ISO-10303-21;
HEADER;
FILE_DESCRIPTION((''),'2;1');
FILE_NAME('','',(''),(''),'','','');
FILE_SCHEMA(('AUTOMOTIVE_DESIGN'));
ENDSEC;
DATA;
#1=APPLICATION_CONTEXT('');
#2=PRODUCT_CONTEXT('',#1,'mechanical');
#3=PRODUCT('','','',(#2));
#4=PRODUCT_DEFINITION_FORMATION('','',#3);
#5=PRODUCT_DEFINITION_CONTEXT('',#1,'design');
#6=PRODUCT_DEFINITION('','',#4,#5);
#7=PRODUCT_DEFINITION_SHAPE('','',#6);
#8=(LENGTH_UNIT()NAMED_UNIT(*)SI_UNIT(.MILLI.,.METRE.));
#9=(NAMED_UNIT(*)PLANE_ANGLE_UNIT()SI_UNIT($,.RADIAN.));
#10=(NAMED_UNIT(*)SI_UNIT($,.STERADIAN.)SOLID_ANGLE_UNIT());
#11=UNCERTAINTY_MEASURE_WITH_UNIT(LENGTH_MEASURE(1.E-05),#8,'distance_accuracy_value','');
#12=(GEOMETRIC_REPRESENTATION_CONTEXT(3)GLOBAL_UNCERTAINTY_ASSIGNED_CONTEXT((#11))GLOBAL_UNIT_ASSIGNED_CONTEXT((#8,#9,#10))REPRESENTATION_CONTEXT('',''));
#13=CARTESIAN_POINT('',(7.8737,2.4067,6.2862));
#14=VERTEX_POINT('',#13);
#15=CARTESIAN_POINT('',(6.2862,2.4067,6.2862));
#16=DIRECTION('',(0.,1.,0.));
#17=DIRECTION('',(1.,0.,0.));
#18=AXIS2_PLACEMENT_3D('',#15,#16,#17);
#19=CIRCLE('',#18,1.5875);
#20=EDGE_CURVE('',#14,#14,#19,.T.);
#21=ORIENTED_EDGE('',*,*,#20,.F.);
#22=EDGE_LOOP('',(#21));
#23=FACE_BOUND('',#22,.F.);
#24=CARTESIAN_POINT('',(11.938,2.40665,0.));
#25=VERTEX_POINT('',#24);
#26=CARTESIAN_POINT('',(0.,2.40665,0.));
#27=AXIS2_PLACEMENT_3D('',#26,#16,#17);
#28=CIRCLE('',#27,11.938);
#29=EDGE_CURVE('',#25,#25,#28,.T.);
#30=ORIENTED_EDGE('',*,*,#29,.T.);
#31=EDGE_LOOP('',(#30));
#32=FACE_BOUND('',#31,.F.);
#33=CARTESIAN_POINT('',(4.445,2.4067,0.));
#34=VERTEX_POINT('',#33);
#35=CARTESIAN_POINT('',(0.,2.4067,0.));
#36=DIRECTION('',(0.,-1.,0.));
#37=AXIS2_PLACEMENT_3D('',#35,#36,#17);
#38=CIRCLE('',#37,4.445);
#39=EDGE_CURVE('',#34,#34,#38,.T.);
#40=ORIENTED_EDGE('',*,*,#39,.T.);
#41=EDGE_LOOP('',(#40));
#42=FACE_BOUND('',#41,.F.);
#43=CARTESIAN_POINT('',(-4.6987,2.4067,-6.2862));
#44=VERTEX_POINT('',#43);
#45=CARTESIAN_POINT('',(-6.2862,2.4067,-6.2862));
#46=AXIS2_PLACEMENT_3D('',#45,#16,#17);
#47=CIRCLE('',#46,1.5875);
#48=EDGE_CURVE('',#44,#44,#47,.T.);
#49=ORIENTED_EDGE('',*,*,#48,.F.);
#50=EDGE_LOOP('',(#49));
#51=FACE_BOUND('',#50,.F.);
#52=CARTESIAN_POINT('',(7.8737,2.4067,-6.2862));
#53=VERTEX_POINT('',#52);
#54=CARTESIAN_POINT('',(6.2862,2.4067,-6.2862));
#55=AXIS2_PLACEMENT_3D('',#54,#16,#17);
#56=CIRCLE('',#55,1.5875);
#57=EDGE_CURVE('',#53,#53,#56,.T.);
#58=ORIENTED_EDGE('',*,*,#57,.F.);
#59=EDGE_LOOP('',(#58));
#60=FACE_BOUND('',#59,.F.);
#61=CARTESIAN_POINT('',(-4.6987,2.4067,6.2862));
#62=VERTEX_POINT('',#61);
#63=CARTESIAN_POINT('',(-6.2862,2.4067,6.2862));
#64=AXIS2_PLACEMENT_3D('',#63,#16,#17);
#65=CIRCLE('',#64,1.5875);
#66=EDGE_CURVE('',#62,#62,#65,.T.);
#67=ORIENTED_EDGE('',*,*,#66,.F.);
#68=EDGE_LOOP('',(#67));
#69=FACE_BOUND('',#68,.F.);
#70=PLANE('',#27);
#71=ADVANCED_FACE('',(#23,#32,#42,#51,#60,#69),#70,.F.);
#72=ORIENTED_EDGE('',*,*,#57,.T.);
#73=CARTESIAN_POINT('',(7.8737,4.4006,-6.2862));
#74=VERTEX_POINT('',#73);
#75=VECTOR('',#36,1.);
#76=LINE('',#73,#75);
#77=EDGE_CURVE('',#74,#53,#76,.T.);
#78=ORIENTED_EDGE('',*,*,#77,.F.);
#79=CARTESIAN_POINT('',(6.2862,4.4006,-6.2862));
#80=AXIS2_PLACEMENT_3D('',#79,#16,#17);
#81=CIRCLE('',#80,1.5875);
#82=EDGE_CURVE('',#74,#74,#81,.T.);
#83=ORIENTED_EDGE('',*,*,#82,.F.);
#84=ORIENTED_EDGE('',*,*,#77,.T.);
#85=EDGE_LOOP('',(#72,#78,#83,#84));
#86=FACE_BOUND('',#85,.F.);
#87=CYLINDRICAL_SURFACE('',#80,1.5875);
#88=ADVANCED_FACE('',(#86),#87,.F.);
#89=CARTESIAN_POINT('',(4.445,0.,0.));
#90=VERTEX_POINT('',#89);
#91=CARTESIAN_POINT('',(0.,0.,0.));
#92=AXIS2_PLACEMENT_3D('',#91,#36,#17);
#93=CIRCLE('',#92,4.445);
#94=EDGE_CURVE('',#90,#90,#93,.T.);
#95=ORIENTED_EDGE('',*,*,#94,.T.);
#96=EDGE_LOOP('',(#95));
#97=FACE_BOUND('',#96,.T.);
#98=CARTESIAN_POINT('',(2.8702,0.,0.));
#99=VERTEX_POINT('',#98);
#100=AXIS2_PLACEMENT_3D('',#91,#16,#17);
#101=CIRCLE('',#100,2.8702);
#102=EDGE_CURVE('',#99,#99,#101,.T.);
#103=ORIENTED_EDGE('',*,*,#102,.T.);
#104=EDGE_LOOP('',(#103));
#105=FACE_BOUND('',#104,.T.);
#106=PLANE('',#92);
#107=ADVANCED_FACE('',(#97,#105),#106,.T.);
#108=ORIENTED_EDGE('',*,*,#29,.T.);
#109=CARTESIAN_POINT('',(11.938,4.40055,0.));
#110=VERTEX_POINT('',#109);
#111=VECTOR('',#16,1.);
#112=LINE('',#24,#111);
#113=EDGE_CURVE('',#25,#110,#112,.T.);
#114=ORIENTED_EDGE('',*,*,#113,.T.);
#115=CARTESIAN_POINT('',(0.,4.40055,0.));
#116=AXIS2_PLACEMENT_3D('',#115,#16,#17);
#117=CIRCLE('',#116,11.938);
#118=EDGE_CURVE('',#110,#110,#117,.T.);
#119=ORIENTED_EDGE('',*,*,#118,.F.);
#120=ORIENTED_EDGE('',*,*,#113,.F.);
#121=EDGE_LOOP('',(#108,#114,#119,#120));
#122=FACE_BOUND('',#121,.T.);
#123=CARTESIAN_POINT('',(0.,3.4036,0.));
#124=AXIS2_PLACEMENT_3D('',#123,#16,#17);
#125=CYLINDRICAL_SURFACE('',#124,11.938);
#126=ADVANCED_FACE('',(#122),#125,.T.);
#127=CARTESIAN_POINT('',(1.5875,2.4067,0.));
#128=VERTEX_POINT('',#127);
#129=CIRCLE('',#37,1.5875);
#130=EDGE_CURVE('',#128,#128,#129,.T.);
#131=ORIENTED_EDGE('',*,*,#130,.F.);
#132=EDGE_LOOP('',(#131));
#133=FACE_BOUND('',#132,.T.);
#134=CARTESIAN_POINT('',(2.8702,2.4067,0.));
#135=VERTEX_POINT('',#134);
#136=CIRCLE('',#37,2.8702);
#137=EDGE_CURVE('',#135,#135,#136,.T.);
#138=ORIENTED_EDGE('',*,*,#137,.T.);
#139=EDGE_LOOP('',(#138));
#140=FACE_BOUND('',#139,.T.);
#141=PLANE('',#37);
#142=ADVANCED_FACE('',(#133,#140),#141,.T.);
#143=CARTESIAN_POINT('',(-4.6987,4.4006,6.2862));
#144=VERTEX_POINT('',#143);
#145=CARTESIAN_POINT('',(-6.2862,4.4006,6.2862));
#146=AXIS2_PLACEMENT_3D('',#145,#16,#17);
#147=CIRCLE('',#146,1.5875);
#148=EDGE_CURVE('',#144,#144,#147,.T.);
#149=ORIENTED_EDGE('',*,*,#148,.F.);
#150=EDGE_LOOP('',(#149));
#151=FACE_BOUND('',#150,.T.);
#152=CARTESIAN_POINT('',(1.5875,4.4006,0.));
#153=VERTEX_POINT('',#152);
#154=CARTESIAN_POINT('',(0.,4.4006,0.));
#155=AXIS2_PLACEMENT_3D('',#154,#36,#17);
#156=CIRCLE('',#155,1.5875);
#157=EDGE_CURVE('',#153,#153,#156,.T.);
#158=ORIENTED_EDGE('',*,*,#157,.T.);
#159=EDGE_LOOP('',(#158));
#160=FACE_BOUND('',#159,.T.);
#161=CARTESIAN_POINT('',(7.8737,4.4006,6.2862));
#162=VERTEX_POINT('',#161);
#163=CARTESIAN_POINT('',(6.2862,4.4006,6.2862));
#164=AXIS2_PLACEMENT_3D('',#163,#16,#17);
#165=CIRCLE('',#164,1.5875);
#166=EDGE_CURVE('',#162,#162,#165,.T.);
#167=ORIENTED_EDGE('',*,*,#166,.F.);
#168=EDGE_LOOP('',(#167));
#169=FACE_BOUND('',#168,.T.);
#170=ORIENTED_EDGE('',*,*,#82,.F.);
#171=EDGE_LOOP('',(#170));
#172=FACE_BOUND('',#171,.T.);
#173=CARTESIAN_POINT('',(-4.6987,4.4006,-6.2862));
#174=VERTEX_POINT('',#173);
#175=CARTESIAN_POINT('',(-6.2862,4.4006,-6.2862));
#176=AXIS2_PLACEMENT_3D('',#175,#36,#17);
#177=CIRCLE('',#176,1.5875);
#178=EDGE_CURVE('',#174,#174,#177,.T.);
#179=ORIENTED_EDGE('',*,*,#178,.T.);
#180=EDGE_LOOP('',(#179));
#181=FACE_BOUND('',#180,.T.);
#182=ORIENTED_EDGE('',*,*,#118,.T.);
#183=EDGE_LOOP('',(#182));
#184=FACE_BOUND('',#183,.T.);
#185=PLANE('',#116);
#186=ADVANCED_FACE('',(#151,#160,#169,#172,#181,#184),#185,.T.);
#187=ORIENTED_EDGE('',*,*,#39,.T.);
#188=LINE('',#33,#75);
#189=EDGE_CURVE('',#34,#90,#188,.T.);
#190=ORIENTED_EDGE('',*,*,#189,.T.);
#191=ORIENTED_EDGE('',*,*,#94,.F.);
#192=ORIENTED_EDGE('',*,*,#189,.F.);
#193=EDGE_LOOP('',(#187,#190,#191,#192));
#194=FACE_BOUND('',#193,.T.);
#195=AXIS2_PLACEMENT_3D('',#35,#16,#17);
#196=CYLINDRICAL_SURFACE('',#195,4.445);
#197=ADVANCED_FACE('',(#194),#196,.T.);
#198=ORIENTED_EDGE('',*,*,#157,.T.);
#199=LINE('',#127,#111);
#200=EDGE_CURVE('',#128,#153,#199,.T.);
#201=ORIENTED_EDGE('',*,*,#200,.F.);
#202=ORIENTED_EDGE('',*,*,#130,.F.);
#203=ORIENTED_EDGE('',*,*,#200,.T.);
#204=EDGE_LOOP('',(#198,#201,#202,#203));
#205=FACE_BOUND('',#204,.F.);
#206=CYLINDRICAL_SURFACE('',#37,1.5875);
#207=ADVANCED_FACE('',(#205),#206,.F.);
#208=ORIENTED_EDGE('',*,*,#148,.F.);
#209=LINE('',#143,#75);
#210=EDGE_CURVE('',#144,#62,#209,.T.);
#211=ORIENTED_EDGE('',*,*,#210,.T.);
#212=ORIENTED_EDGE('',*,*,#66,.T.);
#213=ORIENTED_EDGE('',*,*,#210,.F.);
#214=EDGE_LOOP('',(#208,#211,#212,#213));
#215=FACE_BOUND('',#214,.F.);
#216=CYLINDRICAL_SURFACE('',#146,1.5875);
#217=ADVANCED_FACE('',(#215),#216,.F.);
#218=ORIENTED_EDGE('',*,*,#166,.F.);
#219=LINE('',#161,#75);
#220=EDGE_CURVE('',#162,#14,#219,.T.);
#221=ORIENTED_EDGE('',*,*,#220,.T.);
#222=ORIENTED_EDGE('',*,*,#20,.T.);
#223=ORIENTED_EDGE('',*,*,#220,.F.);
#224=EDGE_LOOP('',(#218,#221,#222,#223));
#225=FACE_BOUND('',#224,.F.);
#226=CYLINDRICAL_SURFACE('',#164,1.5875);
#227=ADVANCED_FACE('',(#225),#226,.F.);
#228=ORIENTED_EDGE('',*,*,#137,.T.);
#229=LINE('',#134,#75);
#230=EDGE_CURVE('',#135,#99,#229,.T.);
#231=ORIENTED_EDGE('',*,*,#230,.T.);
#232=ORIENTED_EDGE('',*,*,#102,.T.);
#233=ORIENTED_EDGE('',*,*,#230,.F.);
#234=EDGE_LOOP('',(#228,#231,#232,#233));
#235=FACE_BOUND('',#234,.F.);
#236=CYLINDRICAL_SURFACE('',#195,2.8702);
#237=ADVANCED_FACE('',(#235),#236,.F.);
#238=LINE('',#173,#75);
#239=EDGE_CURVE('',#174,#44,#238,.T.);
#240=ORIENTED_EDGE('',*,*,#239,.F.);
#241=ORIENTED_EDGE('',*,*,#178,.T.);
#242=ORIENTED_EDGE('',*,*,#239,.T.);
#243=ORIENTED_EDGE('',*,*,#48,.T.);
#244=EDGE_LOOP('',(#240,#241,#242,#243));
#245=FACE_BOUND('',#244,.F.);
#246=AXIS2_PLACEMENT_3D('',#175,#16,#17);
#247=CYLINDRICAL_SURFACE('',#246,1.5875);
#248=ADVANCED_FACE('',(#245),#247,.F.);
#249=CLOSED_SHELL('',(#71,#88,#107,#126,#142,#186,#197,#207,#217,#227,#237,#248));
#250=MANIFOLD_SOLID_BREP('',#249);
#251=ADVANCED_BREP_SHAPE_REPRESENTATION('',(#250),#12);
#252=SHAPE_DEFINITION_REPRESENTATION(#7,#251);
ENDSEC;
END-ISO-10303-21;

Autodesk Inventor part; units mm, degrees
ref_plane "YZ Plane" through (0, 0, 0) normal (1, 0, 0) x (0, 1, 0)
ref_plane "XZ Plane" through (0, 0, 0) normal (0, 1, 0) x (-1, 0, 0)
ref_plane "XY Plane" through (0, 0, 0) normal (0, 0, 1) x (1, 0, 0)
sketch "Sketch1" plane through (0, 0, 0) normal (0, 1, 0) x (-1, 0, 0)
  circle A0 centre (0, 0) radius 2.8702
  dimension "d0" = 5.7404
extrude "Extrusion1" add sketch "Sketch1" along normal blind 3.4036
sketch "Sketch6" plane through (0, 3.4036, 0) normal (0, 1, 0) x (1, 0, 0)
  circle A0 centre (0, 0) radius 11.938
  dimension "d22" = 23.876
extrude "Extrusion8" add sketch "Sketch6" along normal mid plane 1.9939
sketch "Sketch7" plane through (0, 2.4067, 0) normal (0, -1, 0) x (1, 0, 0)
  circle A0 centre (0, 0) radius 4.445
  circle A1 centre (0, 0) radius 2.8702 projected
  circle A2 centre (0, 0) radius 1.5875
  dimension "d25" = 8.89
  dimension "d26" = 3.175
extrude "Extrusion9" add sketch "Sketch7" along normal up to surface (2.4067 mm away) contours A0
extrude "Extrusion10" cut sketch "Sketch7" along normal through all contours A1 | A2
extrude "Extrusion11" cut sketch "Sketch7" against normal blind 1.9939 contours A2
sketch "Sketch8" plane through (0, 4.4006, 0) normal (0, 1, 0) x (1, 0, 0)
  line L0 (0, 0) -> (-6.2862, 6.2862)
  line L1 (0, 0) -> (8.89, 0) construction
  circle A0 centre (-6.2862, 6.2862) radius 1.5875
  circle A1 centre (-6.2862, -6.2862) radius 1.5875
  circle A2 centre (6.2862, -6.2862) radius 1.5875
  circle A3 centre (6.2862, 6.2862) radius 1.5875
  dimension "d33" = 8.89
  dimension "d34" = 135
  dimension "d35" = 3.175
  dimension "d38" = 360
extrude "Extrusion12" cut sketch "Sketch8" against normal blind 1.9939
properties part number "ServoHornDisc" material "ABS Plastic"
